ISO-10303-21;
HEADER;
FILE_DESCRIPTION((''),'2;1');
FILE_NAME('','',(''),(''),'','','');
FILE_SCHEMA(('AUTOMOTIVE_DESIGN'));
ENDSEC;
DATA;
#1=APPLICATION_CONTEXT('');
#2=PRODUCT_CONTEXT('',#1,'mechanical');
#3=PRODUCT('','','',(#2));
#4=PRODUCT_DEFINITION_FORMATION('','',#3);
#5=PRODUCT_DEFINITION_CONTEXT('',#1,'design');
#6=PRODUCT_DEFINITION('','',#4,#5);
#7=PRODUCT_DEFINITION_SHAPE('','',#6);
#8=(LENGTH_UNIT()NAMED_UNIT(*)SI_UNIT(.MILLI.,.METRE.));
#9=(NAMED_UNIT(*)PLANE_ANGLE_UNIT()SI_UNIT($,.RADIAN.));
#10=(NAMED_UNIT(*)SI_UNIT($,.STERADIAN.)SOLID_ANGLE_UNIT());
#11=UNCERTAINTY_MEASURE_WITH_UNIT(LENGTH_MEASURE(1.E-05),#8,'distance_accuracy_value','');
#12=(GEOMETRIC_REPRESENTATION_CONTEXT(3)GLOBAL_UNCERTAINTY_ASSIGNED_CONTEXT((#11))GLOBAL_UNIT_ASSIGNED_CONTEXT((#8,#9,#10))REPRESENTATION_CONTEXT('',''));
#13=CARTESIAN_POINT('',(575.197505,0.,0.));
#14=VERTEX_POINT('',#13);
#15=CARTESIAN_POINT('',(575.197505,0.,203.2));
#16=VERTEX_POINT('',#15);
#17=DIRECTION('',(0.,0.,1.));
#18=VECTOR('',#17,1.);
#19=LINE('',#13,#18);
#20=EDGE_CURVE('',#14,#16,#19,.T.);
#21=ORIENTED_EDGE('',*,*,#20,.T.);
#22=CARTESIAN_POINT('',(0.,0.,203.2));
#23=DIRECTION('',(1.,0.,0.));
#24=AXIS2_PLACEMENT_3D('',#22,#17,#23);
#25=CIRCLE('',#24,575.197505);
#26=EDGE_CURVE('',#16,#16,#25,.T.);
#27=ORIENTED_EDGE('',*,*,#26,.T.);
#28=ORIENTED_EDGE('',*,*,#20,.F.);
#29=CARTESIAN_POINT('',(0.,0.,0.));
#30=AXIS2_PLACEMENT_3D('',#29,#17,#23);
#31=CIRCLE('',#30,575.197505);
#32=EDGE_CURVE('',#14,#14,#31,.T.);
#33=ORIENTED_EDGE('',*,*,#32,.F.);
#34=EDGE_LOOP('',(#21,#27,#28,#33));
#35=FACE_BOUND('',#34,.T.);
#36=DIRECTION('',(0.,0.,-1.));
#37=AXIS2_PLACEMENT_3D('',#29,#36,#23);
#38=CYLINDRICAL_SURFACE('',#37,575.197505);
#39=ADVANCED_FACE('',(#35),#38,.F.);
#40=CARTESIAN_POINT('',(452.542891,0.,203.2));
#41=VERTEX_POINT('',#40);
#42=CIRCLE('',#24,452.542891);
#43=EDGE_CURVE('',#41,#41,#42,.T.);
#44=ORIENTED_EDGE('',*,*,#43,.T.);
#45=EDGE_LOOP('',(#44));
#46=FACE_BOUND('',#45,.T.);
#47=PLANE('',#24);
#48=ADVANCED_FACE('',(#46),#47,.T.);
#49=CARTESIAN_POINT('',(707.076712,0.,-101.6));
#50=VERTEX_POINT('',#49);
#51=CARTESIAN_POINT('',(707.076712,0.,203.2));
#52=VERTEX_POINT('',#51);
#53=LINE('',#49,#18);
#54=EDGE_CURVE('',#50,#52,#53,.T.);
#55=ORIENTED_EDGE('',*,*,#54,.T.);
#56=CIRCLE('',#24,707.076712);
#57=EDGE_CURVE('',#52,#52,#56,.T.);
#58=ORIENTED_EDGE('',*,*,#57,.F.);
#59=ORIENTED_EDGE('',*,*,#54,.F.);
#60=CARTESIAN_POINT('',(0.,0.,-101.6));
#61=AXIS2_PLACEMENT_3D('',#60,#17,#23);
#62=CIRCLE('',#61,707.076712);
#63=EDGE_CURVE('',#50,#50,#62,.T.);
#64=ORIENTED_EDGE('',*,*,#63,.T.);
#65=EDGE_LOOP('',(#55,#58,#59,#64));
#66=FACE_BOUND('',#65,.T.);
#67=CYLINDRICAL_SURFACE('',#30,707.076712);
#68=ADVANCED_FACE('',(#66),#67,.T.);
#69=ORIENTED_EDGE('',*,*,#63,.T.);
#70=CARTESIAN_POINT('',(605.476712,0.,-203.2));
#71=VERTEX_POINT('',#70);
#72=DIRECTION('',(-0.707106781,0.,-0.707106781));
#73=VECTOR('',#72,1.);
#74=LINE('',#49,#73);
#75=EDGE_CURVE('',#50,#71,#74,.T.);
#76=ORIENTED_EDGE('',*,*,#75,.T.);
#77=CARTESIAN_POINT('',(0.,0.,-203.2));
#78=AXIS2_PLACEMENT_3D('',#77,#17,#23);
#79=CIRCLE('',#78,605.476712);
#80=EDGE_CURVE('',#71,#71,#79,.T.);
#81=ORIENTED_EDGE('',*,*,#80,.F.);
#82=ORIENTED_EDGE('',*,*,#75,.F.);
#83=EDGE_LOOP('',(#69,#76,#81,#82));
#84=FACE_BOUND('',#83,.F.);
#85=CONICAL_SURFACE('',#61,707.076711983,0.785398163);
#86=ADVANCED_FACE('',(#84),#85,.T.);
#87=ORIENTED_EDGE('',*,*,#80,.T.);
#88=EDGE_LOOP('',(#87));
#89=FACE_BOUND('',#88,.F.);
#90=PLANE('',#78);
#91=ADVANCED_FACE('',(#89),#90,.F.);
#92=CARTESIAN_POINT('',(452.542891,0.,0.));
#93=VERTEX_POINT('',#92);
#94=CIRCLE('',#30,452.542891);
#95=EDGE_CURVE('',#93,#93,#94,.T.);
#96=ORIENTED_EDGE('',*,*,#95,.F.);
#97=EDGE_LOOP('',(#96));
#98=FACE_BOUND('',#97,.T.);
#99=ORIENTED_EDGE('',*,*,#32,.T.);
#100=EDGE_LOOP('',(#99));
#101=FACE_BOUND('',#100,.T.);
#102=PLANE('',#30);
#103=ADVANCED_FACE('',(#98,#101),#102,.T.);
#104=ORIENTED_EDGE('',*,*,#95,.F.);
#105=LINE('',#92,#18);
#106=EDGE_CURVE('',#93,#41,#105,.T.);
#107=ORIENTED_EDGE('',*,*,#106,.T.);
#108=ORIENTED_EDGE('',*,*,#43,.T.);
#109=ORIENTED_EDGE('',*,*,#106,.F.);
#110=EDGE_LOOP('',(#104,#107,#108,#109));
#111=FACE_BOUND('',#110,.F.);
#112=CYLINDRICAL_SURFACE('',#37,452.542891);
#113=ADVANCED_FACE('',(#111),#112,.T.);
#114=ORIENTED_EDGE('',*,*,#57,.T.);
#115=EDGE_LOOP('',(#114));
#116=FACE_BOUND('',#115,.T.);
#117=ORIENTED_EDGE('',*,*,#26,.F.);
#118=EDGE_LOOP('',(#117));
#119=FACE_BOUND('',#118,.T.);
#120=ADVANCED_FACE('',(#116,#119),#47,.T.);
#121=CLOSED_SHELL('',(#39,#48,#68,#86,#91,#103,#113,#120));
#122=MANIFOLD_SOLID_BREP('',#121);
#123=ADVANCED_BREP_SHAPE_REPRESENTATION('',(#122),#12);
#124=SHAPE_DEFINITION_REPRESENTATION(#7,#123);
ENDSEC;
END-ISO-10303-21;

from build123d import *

# Parameters (mm, degrees)
F0_R     = 707.076711983
F0_R_2   = 575.1975047279
F0_R_3   = 452.5428910843
F1_DEPTH = 203.2
F2_DEPTH = 203.2
F3_SIZE  = 101.6


# Not quite as in the source:
# - a feature names something its author has since deleted; it is built from what else it names


with BuildPart() as f1:
    # F0 (on Top) → F1 (new body)
    with BuildSketch(Plane.XY):
        Circle(F0_R)
        Circle(F0_R_2, mode=Mode.SUBTRACT)
        Circle(F0_R_2)
        Circle(F0_R_3, mode=Mode.SUBTRACT)
        Circle(F0_R_3)
    extrude(amount=-F1_DEPTH)

    # F0 (on Top) → F2 (join)
    with BuildSketch(Plane.XY):
        Circle(F0_R)
        Circle(F0_R_2, mode=Mode.SUBTRACT)
        Circle(F0_R_3)
    extrude(amount=F2_DEPTH)

    # F3
    f3_edges = [f1.edges().sort_by_distance(p)[0] for p in [
        (-707.076712, 0, -203.2),
    ]]
    chamfer(f3_edges, length=F3_SIZE)


solid = f1.part
